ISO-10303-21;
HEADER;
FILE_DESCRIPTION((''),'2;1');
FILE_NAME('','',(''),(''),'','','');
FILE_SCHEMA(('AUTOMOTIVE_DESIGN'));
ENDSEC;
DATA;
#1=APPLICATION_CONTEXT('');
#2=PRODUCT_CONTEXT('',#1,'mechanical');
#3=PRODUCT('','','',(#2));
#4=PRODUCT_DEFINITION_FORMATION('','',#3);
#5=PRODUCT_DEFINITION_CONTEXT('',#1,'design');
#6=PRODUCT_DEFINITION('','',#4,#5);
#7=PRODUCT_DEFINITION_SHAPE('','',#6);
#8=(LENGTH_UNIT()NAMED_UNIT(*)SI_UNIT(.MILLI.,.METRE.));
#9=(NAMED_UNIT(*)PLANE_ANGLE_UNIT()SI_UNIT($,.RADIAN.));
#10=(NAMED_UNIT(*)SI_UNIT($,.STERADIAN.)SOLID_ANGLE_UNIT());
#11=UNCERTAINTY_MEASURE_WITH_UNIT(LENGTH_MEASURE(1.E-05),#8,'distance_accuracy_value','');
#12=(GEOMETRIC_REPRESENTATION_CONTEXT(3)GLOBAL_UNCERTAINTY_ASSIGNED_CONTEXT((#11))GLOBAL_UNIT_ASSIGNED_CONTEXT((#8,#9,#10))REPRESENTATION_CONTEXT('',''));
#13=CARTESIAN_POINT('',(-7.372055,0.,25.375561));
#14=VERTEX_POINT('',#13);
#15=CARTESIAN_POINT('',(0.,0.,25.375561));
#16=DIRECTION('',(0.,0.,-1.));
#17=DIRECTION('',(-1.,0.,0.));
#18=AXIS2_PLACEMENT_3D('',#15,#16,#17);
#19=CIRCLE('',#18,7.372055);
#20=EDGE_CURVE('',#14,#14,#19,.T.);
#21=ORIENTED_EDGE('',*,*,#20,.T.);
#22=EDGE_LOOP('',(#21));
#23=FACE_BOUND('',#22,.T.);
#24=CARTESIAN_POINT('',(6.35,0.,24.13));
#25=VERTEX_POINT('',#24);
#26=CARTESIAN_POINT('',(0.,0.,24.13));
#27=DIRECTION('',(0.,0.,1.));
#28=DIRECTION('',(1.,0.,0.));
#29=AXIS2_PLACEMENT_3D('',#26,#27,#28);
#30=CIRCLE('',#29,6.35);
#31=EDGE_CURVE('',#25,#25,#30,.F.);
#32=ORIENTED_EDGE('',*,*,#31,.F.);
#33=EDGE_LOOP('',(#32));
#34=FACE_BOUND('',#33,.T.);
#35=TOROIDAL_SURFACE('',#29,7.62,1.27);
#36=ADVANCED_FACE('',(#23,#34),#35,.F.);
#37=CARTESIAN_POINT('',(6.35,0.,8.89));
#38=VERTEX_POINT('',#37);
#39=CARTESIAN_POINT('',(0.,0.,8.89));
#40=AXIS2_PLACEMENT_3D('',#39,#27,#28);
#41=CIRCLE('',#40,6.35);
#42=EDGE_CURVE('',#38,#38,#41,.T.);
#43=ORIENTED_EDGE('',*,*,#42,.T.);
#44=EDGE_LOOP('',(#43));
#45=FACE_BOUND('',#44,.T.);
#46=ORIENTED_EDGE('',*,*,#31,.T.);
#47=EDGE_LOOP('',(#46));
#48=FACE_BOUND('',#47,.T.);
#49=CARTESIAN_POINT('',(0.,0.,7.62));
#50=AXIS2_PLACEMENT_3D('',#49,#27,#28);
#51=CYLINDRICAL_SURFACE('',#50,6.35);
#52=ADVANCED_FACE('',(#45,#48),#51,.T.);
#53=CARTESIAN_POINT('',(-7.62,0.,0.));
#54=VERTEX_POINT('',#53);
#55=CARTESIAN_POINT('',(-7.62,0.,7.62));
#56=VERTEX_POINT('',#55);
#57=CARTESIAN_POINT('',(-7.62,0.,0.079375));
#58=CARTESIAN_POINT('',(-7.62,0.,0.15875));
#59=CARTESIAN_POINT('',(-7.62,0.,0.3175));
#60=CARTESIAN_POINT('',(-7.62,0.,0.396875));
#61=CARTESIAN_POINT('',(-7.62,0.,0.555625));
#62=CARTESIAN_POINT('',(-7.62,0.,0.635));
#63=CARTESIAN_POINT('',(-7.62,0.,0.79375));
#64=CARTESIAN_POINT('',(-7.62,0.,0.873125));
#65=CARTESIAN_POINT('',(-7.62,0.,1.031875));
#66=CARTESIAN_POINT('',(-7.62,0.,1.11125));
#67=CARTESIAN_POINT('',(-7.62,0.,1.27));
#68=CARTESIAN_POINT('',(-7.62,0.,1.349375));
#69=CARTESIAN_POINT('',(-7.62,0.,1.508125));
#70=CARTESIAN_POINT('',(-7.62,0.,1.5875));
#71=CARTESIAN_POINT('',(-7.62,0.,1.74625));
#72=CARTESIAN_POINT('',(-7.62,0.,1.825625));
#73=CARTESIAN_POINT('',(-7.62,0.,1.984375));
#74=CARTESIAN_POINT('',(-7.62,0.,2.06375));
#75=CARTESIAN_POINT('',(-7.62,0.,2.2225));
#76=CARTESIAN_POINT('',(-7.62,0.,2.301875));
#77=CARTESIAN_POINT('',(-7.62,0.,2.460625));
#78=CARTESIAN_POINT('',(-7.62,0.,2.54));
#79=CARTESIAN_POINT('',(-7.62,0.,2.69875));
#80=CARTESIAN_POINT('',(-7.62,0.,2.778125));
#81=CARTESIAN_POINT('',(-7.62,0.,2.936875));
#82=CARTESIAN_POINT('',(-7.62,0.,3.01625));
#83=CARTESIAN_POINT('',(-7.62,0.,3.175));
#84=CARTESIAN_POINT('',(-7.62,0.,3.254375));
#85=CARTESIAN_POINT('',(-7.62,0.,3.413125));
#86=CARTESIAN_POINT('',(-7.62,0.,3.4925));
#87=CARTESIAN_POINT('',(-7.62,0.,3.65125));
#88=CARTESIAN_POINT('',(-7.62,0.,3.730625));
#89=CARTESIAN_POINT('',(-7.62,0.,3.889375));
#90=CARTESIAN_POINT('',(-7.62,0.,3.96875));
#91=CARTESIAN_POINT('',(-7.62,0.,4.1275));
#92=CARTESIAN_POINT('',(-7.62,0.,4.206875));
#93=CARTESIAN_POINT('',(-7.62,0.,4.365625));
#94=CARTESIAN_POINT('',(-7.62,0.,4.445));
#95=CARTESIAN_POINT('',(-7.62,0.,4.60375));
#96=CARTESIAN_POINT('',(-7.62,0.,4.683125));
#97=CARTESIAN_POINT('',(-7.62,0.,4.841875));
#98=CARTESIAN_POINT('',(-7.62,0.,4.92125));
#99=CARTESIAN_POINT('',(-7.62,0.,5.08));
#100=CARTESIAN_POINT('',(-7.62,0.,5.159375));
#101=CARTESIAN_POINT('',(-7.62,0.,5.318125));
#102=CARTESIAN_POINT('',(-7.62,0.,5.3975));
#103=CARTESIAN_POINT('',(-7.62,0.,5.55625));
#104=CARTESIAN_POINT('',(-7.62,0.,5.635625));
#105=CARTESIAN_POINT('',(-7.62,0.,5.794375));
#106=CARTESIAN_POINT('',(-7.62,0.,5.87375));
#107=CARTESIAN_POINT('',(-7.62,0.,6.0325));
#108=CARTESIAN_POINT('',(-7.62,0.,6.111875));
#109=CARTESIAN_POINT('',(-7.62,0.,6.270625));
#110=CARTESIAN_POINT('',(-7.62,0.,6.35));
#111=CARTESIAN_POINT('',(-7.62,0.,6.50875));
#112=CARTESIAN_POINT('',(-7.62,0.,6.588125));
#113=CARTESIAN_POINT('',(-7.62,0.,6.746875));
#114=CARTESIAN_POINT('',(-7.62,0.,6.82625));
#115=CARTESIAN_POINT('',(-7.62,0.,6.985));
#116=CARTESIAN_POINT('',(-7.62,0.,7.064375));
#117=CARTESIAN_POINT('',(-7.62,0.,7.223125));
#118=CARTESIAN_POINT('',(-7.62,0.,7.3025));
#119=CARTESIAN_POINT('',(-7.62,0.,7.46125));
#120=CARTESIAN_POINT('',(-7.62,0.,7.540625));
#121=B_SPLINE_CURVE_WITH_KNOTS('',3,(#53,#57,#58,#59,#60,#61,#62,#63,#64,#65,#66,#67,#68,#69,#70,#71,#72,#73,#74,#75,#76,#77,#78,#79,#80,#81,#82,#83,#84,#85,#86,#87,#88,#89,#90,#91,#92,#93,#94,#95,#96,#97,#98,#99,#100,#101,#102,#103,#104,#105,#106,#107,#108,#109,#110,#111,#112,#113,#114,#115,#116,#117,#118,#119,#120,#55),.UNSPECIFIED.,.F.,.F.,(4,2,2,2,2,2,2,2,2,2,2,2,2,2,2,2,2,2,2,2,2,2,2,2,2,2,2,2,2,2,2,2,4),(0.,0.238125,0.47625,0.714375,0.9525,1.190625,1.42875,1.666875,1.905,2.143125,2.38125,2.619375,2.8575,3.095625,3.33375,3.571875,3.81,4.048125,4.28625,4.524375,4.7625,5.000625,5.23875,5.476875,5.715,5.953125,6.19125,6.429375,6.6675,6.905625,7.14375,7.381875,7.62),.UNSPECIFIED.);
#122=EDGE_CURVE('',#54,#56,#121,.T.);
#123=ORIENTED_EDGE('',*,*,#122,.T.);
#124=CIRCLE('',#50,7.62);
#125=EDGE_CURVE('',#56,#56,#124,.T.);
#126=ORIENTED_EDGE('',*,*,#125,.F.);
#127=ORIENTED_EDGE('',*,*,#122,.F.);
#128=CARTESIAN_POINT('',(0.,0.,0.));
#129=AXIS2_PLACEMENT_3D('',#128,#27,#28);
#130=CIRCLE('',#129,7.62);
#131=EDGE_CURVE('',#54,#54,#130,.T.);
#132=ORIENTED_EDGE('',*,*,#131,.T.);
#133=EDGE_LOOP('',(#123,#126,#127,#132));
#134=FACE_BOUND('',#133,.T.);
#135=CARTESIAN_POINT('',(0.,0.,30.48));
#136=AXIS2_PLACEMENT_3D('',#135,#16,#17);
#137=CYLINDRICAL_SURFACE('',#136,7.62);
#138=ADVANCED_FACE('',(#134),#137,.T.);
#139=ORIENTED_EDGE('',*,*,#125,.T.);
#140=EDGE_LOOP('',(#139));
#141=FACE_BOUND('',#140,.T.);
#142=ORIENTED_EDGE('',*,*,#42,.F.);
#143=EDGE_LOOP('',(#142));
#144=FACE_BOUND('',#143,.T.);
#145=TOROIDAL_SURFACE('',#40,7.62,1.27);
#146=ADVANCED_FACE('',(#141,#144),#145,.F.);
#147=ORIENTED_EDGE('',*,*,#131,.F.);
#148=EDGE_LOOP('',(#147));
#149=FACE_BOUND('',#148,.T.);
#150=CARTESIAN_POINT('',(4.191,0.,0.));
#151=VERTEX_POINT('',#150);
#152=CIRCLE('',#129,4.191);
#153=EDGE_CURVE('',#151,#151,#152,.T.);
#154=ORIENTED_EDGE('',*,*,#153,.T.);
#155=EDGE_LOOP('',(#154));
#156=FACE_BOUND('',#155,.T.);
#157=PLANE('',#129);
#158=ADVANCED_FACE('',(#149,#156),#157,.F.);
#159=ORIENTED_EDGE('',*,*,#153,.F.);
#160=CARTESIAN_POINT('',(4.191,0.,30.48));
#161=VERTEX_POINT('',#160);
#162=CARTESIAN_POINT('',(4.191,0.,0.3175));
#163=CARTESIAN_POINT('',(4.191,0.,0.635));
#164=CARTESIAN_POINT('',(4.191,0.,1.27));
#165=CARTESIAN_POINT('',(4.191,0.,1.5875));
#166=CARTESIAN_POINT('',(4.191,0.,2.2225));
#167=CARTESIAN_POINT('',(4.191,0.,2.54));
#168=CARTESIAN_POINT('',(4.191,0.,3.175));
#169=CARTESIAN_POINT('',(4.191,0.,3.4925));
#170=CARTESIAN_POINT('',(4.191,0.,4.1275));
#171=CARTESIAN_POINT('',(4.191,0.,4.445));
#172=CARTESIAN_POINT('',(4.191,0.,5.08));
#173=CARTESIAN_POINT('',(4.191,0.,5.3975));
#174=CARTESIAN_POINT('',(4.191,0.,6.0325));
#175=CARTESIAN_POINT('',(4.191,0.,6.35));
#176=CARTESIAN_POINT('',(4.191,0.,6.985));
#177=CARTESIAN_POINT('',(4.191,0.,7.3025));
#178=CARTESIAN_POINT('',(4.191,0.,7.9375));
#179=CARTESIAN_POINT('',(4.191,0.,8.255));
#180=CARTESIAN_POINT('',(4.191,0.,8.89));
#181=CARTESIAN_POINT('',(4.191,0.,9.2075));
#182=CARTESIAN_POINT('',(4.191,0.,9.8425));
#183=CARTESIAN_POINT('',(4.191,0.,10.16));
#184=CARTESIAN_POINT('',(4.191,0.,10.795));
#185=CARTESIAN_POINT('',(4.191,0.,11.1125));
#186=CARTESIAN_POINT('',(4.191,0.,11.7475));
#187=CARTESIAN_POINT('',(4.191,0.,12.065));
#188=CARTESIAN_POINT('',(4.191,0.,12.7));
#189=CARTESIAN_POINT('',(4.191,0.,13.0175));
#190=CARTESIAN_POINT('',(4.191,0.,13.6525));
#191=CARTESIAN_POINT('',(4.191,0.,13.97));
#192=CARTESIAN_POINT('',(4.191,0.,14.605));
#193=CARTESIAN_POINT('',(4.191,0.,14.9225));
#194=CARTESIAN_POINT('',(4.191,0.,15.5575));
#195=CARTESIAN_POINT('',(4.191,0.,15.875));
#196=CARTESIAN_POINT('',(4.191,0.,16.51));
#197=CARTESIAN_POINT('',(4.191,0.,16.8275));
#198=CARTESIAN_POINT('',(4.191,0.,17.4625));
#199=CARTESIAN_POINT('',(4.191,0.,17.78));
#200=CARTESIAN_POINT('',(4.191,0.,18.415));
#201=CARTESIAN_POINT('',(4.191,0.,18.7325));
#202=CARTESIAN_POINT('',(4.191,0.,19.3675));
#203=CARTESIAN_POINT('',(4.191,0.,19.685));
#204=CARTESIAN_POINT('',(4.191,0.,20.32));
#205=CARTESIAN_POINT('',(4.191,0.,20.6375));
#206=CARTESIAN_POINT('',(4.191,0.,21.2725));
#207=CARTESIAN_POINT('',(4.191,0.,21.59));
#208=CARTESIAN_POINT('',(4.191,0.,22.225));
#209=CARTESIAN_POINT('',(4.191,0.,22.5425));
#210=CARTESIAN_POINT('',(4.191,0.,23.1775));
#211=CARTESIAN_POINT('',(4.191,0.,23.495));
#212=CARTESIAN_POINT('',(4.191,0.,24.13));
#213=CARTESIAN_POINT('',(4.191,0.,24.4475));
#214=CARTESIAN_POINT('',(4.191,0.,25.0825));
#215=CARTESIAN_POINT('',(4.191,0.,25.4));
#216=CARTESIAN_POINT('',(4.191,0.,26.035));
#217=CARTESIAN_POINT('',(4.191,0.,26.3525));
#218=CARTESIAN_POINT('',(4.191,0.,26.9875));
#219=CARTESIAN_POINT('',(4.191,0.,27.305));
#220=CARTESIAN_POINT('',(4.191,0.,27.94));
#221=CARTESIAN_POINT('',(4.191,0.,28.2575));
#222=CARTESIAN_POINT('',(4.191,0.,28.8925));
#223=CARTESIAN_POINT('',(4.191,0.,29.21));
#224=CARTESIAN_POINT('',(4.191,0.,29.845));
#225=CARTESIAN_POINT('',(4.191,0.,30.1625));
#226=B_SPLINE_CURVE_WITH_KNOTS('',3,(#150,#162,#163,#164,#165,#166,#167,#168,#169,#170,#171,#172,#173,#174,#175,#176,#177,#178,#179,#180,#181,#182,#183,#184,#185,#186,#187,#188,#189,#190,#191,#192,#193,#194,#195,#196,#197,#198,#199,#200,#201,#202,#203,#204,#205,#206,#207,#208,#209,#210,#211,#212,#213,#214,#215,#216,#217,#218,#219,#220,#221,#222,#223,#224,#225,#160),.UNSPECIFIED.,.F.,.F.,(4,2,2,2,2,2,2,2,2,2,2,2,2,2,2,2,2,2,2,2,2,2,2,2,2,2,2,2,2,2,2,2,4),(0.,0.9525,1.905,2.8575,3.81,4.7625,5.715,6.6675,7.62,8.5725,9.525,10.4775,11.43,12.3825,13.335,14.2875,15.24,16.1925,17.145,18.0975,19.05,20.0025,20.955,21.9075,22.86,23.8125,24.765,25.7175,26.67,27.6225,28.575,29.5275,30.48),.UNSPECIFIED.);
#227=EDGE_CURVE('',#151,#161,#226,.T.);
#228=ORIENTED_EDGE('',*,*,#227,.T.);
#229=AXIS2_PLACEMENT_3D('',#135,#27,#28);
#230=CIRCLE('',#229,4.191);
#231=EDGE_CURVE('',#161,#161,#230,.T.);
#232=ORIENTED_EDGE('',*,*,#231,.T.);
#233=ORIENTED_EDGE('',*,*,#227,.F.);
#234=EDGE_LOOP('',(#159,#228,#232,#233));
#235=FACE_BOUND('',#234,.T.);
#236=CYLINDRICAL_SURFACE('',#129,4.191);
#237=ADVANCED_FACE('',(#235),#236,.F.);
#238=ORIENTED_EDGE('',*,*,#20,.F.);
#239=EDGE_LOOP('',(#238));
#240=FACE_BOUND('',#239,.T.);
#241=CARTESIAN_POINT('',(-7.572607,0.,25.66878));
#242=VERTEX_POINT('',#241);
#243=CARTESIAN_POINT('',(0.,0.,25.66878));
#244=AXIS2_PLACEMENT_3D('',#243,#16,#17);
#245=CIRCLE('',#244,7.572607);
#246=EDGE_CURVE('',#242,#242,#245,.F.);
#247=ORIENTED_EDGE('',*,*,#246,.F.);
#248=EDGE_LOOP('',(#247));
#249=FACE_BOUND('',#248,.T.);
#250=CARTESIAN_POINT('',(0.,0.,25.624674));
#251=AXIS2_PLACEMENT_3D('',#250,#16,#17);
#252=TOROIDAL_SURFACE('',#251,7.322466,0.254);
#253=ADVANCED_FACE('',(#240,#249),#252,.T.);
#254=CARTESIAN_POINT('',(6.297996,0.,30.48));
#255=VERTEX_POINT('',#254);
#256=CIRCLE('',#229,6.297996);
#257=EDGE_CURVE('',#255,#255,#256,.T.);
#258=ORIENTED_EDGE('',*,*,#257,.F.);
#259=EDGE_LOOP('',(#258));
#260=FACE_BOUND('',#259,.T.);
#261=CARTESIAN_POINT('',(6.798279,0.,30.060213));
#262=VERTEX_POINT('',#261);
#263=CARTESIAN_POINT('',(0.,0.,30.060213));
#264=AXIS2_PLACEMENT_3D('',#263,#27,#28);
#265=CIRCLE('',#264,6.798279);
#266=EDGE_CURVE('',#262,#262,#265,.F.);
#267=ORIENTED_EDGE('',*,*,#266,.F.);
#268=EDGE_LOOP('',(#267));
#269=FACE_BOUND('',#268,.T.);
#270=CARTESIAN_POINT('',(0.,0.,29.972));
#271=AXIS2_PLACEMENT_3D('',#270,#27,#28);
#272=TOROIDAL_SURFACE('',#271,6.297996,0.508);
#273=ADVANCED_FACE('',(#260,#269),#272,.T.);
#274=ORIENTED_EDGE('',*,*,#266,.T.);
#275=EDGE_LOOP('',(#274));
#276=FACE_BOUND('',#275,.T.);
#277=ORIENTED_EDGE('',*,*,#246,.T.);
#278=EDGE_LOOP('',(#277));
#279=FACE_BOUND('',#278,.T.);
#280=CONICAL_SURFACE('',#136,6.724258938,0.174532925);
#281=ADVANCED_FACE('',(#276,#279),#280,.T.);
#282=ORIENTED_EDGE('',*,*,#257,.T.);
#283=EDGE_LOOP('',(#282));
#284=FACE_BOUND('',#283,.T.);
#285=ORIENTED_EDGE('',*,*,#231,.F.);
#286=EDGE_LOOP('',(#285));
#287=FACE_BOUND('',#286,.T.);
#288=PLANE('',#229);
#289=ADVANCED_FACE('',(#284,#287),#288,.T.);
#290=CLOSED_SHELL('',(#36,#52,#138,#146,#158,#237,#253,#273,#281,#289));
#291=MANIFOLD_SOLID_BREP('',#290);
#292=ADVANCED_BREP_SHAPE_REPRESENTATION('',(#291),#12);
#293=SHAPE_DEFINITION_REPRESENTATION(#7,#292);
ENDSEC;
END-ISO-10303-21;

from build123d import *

# Parameters (mm, degrees)
SKETCH1_R           = 7.62
BOSS_EXTRUDE1_DEPTH = 30.48
SKETCH2_R           = 4.191
CUT_EXTRUDE1_DEPTH  = 30.48
CUT_EXTRUDE2_START  = -5.08
SKETCH3_R           = 10.16
SKETCH3_R_2         = 6.35
CUT_EXTRUDE2_DEPTH  = 17.78
FILLET1_R           = 1.27
FILLET2_R           = 1.27
CHAMFER1_SIZE       = 5.08
CHAMFER1_SIZE_2     = 0.895741062
FILLET3_R           = 0.508
FILLET4_R           = 0.254


# Some blends are built 0.0001 mm under size
with BuildPart() as part:
    # Sketch1 → Boss-Extrude1 (new body)
    with BuildSketch(Plane.XY):
        with Locations(Location((0, 0, 0), (0, 0, 180))):
            Circle(SKETCH1_R)
    extrude(amount=BOSS_EXTRUDE1_DEPTH)

    # Sketch2 → Cut-Extrude1 (cut)
    with BuildSketch(Plane.XY.offset(30.48)):
        Circle(SKETCH2_R)
    extrude(amount=-CUT_EXTRUDE1_DEPTH, mode=Mode.SUBTRACT)

    # Sketch3 → Cut-Extrude2 (cut)
    with BuildSketch(Plane.XY.offset(30.48).offset(CUT_EXTRUDE2_START)):
        Circle(SKETCH3_R)
        Circle(SKETCH3_R_2, mode=Mode.SUBTRACT)
    extrude(amount=-CUT_EXTRUDE2_DEPTH, mode=Mode.SUBTRACT)

    # Fillet1
    fillet1_edges = [part.edges().sort_by_distance(p)[0] for p in [
        (-6.35, 0, 7.62),
    ]]
    fillet(fillet1_edges, radius=FILLET1_R - 0.0001)  # a hair under: the kernel refuses the full size

    # Fillet2
    fillet2_edges = [part.edges().sort_by_distance(p)[0] for p in [
        (-6.35, 0, 25.4),
    ]]
    fillet(fillet2_edges, radius=FILLET2_R - 0.0001)  # a hair under: the kernel refuses the full size

    # Chamfer1
    # the kernel refuses this chamfer: 5.08, 0.895741062 mm, written as the material it takes off along each edge
    with BuildSketch(Plane(origin=(0, 0, 30.48), x_dir=(-1, 0, 0), z_dir=(0, 1, 0))) as chamfer1_piece_1:
        Polygon((7.62, -CHAMFER1_SIZE), (7.62 - CHAMFER1_SIZE_2, 0), (7.62, 0), align=None)
    revolve(axis=Axis((0, 0, 30.48), (0, 0, 1)), mode=Mode.SUBTRACT)

    # Fillet3
    fillet3_edges = [part.edges().sort_by_distance(p)[0] for p in [
        (6.724258938, 0, 30.48),
    ]]
    fillet(fillet3_edges, radius=FILLET3_R)

    # Fillet4
    fillet4_edges = [part.edges().sort_by_distance(p)[0] for p in [
        (7.62, 0, 25.4),
    ]]
    fillet(fillet4_edges, radius=FILLET4_R)


solid = part.part
